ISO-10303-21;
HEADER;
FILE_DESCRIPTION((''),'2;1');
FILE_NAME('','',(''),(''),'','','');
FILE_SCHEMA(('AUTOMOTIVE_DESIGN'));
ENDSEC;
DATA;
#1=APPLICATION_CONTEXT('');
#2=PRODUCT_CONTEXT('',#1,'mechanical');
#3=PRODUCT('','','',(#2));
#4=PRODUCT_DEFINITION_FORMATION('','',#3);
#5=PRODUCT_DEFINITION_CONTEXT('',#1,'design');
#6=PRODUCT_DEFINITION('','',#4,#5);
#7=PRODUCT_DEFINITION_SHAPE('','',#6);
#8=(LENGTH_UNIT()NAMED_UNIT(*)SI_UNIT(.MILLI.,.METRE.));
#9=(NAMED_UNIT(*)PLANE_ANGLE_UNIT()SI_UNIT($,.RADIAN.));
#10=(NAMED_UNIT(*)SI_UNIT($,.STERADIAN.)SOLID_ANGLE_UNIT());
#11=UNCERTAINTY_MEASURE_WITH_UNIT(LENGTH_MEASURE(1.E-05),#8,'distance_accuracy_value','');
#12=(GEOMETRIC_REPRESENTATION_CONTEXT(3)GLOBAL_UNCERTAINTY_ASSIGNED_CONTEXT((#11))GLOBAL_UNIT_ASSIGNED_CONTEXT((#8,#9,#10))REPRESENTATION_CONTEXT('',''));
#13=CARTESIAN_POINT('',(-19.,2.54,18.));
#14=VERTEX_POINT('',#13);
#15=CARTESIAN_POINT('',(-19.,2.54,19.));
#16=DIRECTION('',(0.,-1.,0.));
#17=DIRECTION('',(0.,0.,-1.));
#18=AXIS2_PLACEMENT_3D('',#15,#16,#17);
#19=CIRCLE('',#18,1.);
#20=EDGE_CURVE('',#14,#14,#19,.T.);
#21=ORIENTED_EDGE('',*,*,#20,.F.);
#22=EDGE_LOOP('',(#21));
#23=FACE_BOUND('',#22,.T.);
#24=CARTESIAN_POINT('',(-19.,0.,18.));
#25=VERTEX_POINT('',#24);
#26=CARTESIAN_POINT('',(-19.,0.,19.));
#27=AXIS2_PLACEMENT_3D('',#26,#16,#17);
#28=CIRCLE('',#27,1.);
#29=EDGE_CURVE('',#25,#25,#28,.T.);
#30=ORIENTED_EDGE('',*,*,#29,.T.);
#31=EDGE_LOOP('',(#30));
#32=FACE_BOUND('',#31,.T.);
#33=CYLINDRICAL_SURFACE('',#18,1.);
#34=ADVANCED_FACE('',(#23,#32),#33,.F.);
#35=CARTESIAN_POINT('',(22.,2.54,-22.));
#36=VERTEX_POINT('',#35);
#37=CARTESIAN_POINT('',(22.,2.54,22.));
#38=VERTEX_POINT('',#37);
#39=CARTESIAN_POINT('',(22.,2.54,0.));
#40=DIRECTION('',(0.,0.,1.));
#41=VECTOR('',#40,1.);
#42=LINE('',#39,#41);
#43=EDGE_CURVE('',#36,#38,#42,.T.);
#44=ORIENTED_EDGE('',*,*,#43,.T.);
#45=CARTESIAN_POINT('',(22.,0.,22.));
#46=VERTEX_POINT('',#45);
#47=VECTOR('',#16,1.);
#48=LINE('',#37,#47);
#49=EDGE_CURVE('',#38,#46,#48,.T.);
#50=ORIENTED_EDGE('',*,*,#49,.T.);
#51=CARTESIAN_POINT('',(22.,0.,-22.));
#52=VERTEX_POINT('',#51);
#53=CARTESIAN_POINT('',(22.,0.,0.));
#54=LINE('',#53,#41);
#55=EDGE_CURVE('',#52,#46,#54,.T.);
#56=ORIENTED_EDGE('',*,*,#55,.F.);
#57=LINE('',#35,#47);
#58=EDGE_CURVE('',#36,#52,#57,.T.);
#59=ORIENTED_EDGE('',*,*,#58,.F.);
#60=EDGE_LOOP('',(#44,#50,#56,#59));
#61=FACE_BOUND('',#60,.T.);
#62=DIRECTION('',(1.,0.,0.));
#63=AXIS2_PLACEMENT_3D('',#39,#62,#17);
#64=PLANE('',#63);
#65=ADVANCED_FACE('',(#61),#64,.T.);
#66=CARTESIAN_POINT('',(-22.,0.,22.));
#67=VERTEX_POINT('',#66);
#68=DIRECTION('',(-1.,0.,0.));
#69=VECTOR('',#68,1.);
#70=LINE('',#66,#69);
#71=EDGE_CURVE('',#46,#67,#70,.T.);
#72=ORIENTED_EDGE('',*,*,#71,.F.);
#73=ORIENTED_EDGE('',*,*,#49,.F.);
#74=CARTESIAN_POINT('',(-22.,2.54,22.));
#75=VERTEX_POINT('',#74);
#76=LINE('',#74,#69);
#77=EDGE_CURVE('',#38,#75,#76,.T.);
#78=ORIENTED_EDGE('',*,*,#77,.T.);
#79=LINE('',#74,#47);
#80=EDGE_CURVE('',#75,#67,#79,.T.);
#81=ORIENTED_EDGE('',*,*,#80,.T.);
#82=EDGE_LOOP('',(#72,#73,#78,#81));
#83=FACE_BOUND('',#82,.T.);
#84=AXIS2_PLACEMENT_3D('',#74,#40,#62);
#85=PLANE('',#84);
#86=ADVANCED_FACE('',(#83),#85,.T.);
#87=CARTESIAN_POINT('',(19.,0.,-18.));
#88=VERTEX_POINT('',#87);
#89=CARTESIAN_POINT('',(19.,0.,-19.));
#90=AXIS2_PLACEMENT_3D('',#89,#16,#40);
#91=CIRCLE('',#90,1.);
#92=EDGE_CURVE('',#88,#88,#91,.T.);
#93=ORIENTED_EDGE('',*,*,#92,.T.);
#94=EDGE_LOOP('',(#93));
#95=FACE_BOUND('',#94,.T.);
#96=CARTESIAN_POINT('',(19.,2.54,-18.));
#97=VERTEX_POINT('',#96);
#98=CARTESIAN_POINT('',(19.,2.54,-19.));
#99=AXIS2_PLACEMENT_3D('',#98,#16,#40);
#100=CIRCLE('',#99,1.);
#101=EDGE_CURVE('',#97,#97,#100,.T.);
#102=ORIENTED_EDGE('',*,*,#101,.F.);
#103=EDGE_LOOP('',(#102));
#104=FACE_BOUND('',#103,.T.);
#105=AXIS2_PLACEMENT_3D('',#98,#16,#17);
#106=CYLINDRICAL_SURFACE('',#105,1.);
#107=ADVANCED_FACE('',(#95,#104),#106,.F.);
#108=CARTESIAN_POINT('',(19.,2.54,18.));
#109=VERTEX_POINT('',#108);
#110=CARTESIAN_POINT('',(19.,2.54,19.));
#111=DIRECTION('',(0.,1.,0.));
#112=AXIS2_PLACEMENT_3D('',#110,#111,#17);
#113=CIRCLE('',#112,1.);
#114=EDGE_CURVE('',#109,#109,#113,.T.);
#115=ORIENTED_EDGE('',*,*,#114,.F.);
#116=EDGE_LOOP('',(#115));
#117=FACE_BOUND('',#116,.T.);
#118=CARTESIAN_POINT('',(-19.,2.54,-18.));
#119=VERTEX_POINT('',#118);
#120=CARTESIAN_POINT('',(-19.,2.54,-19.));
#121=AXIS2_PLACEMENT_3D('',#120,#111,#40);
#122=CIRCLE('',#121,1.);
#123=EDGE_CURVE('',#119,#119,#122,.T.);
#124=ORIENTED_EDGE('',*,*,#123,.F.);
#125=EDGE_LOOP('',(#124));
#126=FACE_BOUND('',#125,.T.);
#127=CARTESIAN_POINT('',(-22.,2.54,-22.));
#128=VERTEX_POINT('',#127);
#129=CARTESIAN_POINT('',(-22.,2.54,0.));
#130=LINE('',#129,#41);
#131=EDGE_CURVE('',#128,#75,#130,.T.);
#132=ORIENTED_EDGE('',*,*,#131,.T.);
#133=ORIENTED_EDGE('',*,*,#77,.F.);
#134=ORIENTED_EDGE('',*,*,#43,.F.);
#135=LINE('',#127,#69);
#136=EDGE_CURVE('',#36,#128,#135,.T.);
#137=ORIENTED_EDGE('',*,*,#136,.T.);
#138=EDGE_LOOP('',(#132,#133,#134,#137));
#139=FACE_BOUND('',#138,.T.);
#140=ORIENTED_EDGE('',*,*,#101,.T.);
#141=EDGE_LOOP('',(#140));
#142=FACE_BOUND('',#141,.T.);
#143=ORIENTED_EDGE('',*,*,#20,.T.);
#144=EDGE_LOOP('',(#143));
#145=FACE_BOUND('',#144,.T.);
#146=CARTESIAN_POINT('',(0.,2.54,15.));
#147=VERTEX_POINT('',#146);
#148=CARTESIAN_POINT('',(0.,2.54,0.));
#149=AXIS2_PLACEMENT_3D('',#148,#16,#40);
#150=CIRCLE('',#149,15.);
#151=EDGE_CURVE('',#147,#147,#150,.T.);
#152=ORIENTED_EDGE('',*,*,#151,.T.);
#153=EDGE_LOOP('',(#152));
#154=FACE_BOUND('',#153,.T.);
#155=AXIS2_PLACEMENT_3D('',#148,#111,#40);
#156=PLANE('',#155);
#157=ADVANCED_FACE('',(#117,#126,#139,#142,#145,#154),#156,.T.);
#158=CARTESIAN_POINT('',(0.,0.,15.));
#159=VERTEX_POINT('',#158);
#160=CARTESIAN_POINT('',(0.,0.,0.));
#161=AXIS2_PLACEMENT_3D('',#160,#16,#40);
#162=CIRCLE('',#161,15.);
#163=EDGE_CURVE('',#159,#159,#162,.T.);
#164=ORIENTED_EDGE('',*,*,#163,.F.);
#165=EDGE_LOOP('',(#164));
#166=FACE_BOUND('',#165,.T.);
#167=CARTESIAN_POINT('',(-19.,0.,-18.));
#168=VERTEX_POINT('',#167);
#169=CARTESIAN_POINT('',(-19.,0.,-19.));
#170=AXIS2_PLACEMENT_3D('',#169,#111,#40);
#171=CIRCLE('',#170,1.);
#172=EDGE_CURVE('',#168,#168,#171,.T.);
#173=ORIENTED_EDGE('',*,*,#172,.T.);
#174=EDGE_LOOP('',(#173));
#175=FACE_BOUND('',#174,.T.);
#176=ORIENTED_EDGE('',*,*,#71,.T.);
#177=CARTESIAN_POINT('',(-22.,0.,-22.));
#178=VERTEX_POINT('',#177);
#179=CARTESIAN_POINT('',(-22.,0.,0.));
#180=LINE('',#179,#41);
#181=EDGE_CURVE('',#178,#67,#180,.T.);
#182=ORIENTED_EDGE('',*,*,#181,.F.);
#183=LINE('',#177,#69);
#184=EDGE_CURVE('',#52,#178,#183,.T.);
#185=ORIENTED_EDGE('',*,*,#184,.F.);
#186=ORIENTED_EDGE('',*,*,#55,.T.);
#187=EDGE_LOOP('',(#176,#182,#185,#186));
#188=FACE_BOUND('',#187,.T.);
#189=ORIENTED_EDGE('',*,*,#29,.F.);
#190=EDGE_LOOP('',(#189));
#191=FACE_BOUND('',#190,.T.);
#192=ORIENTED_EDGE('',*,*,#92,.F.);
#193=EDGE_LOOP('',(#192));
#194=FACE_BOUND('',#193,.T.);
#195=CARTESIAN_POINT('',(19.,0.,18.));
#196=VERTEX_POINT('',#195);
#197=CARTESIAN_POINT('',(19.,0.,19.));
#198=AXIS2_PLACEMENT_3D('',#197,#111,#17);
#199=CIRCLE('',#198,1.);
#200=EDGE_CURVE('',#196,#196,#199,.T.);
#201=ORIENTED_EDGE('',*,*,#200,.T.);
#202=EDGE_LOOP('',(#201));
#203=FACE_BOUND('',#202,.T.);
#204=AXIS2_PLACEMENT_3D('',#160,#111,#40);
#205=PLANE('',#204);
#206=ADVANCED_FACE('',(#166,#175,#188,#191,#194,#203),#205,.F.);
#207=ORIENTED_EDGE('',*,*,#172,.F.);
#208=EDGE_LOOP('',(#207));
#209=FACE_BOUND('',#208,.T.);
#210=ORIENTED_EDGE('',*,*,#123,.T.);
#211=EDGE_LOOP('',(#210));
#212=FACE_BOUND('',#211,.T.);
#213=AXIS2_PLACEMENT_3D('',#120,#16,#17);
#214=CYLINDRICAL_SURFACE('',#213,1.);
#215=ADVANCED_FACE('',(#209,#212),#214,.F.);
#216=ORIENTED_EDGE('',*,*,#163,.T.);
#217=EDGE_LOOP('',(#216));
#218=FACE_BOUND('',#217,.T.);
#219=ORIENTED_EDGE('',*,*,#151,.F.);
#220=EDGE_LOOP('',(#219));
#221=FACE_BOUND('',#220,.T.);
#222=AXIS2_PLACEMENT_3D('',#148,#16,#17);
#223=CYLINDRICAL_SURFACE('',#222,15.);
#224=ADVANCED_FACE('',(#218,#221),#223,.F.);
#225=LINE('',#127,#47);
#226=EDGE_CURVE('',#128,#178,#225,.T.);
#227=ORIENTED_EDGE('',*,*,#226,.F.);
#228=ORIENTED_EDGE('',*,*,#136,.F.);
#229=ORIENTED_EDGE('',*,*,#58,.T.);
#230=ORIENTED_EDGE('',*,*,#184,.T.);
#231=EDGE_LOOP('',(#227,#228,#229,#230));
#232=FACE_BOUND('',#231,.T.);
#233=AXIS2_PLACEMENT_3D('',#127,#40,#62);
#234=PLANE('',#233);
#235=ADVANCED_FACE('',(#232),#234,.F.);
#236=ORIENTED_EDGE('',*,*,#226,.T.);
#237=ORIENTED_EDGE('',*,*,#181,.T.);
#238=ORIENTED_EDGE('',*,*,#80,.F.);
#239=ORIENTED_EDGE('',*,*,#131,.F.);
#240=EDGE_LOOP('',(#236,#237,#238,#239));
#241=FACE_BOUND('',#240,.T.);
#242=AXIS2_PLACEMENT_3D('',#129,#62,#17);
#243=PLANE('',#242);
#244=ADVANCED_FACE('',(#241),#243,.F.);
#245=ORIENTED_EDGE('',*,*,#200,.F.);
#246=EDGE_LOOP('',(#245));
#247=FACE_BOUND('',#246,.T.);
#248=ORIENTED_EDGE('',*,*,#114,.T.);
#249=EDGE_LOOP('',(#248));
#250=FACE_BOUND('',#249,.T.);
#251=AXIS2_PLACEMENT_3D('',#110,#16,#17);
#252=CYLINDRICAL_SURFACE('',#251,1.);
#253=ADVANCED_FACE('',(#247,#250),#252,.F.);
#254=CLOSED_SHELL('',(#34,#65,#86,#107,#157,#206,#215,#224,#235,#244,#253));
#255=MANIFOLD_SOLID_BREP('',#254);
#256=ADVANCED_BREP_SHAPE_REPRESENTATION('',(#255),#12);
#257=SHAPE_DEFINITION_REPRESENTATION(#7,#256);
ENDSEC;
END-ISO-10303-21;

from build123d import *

# Parameters (mm, degrees)
SKETCH1_R           = 1
BOSS_EXTRUDE1_DEPTH = 2.54
MIRROR2_OUTLINE_R   = 1
MIRROR2_DEPTH       = 2.54


# Read off the part's stored shape, not the designer's step: Mirror2
with BuildPart() as part:
    # Sketch1 → Boss-Extrude1 (new body)
    with BuildSketch(Plane(origin=(0, 0, 0), x_dir=(1, 0, 0), z_dir=(0, 1, 0))):
        with BuildLine():
            Line((0, 22), (0, 15))
            ThreePointArc((0, 15), (-10.606601718, 10.606601718), (-15, 0))
            Line((-15, 0), (-22, 0))
            Line((-22, 0), (-22, 22))
            Line((-22, 22), (0, 22))
        make_face()
        with Locations(Location((-19, 19, 0), (0, 0, 270))):
            Circle(SKETCH1_R, mode=Mode.SUBTRACT)
    extrude(amount=BOSS_EXTRUDE1_DEPTH)

    # Mirror2 outline → Mirror2 (add)
    with BuildSketch(Plane(origin=(0, 0, 0), x_dir=(1, 0, 0), z_dir=(0, 1, 0))):
        with BuildLine():
            Line((22, 22), (0, 22))
            Line((0, 22), (0, 15))
            ThreePointArc((0, 15), (10.606601718, -10.606601718), (-15, 0))
            Line((-15, 0), (-22, 0))
            Line((-22, 0), (-22, -22))
            Line((-22, -22), (22, -22))
            Line((22, -22), (22, 22))
        make_face()
        with Locations((-19, -19)):
            Circle(MIRROR2_OUTLINE_R, mode=Mode.SUBTRACT)
        with Locations((19, -19)):
            Circle(MIRROR2_OUTLINE_R, mode=Mode.SUBTRACT)
        with Locations((19, 19)):
            Circle(MIRROR2_OUTLINE_R, mode=Mode.SUBTRACT)
    extrude(amount=MIRROR2_DEPTH)


solid = part.part
